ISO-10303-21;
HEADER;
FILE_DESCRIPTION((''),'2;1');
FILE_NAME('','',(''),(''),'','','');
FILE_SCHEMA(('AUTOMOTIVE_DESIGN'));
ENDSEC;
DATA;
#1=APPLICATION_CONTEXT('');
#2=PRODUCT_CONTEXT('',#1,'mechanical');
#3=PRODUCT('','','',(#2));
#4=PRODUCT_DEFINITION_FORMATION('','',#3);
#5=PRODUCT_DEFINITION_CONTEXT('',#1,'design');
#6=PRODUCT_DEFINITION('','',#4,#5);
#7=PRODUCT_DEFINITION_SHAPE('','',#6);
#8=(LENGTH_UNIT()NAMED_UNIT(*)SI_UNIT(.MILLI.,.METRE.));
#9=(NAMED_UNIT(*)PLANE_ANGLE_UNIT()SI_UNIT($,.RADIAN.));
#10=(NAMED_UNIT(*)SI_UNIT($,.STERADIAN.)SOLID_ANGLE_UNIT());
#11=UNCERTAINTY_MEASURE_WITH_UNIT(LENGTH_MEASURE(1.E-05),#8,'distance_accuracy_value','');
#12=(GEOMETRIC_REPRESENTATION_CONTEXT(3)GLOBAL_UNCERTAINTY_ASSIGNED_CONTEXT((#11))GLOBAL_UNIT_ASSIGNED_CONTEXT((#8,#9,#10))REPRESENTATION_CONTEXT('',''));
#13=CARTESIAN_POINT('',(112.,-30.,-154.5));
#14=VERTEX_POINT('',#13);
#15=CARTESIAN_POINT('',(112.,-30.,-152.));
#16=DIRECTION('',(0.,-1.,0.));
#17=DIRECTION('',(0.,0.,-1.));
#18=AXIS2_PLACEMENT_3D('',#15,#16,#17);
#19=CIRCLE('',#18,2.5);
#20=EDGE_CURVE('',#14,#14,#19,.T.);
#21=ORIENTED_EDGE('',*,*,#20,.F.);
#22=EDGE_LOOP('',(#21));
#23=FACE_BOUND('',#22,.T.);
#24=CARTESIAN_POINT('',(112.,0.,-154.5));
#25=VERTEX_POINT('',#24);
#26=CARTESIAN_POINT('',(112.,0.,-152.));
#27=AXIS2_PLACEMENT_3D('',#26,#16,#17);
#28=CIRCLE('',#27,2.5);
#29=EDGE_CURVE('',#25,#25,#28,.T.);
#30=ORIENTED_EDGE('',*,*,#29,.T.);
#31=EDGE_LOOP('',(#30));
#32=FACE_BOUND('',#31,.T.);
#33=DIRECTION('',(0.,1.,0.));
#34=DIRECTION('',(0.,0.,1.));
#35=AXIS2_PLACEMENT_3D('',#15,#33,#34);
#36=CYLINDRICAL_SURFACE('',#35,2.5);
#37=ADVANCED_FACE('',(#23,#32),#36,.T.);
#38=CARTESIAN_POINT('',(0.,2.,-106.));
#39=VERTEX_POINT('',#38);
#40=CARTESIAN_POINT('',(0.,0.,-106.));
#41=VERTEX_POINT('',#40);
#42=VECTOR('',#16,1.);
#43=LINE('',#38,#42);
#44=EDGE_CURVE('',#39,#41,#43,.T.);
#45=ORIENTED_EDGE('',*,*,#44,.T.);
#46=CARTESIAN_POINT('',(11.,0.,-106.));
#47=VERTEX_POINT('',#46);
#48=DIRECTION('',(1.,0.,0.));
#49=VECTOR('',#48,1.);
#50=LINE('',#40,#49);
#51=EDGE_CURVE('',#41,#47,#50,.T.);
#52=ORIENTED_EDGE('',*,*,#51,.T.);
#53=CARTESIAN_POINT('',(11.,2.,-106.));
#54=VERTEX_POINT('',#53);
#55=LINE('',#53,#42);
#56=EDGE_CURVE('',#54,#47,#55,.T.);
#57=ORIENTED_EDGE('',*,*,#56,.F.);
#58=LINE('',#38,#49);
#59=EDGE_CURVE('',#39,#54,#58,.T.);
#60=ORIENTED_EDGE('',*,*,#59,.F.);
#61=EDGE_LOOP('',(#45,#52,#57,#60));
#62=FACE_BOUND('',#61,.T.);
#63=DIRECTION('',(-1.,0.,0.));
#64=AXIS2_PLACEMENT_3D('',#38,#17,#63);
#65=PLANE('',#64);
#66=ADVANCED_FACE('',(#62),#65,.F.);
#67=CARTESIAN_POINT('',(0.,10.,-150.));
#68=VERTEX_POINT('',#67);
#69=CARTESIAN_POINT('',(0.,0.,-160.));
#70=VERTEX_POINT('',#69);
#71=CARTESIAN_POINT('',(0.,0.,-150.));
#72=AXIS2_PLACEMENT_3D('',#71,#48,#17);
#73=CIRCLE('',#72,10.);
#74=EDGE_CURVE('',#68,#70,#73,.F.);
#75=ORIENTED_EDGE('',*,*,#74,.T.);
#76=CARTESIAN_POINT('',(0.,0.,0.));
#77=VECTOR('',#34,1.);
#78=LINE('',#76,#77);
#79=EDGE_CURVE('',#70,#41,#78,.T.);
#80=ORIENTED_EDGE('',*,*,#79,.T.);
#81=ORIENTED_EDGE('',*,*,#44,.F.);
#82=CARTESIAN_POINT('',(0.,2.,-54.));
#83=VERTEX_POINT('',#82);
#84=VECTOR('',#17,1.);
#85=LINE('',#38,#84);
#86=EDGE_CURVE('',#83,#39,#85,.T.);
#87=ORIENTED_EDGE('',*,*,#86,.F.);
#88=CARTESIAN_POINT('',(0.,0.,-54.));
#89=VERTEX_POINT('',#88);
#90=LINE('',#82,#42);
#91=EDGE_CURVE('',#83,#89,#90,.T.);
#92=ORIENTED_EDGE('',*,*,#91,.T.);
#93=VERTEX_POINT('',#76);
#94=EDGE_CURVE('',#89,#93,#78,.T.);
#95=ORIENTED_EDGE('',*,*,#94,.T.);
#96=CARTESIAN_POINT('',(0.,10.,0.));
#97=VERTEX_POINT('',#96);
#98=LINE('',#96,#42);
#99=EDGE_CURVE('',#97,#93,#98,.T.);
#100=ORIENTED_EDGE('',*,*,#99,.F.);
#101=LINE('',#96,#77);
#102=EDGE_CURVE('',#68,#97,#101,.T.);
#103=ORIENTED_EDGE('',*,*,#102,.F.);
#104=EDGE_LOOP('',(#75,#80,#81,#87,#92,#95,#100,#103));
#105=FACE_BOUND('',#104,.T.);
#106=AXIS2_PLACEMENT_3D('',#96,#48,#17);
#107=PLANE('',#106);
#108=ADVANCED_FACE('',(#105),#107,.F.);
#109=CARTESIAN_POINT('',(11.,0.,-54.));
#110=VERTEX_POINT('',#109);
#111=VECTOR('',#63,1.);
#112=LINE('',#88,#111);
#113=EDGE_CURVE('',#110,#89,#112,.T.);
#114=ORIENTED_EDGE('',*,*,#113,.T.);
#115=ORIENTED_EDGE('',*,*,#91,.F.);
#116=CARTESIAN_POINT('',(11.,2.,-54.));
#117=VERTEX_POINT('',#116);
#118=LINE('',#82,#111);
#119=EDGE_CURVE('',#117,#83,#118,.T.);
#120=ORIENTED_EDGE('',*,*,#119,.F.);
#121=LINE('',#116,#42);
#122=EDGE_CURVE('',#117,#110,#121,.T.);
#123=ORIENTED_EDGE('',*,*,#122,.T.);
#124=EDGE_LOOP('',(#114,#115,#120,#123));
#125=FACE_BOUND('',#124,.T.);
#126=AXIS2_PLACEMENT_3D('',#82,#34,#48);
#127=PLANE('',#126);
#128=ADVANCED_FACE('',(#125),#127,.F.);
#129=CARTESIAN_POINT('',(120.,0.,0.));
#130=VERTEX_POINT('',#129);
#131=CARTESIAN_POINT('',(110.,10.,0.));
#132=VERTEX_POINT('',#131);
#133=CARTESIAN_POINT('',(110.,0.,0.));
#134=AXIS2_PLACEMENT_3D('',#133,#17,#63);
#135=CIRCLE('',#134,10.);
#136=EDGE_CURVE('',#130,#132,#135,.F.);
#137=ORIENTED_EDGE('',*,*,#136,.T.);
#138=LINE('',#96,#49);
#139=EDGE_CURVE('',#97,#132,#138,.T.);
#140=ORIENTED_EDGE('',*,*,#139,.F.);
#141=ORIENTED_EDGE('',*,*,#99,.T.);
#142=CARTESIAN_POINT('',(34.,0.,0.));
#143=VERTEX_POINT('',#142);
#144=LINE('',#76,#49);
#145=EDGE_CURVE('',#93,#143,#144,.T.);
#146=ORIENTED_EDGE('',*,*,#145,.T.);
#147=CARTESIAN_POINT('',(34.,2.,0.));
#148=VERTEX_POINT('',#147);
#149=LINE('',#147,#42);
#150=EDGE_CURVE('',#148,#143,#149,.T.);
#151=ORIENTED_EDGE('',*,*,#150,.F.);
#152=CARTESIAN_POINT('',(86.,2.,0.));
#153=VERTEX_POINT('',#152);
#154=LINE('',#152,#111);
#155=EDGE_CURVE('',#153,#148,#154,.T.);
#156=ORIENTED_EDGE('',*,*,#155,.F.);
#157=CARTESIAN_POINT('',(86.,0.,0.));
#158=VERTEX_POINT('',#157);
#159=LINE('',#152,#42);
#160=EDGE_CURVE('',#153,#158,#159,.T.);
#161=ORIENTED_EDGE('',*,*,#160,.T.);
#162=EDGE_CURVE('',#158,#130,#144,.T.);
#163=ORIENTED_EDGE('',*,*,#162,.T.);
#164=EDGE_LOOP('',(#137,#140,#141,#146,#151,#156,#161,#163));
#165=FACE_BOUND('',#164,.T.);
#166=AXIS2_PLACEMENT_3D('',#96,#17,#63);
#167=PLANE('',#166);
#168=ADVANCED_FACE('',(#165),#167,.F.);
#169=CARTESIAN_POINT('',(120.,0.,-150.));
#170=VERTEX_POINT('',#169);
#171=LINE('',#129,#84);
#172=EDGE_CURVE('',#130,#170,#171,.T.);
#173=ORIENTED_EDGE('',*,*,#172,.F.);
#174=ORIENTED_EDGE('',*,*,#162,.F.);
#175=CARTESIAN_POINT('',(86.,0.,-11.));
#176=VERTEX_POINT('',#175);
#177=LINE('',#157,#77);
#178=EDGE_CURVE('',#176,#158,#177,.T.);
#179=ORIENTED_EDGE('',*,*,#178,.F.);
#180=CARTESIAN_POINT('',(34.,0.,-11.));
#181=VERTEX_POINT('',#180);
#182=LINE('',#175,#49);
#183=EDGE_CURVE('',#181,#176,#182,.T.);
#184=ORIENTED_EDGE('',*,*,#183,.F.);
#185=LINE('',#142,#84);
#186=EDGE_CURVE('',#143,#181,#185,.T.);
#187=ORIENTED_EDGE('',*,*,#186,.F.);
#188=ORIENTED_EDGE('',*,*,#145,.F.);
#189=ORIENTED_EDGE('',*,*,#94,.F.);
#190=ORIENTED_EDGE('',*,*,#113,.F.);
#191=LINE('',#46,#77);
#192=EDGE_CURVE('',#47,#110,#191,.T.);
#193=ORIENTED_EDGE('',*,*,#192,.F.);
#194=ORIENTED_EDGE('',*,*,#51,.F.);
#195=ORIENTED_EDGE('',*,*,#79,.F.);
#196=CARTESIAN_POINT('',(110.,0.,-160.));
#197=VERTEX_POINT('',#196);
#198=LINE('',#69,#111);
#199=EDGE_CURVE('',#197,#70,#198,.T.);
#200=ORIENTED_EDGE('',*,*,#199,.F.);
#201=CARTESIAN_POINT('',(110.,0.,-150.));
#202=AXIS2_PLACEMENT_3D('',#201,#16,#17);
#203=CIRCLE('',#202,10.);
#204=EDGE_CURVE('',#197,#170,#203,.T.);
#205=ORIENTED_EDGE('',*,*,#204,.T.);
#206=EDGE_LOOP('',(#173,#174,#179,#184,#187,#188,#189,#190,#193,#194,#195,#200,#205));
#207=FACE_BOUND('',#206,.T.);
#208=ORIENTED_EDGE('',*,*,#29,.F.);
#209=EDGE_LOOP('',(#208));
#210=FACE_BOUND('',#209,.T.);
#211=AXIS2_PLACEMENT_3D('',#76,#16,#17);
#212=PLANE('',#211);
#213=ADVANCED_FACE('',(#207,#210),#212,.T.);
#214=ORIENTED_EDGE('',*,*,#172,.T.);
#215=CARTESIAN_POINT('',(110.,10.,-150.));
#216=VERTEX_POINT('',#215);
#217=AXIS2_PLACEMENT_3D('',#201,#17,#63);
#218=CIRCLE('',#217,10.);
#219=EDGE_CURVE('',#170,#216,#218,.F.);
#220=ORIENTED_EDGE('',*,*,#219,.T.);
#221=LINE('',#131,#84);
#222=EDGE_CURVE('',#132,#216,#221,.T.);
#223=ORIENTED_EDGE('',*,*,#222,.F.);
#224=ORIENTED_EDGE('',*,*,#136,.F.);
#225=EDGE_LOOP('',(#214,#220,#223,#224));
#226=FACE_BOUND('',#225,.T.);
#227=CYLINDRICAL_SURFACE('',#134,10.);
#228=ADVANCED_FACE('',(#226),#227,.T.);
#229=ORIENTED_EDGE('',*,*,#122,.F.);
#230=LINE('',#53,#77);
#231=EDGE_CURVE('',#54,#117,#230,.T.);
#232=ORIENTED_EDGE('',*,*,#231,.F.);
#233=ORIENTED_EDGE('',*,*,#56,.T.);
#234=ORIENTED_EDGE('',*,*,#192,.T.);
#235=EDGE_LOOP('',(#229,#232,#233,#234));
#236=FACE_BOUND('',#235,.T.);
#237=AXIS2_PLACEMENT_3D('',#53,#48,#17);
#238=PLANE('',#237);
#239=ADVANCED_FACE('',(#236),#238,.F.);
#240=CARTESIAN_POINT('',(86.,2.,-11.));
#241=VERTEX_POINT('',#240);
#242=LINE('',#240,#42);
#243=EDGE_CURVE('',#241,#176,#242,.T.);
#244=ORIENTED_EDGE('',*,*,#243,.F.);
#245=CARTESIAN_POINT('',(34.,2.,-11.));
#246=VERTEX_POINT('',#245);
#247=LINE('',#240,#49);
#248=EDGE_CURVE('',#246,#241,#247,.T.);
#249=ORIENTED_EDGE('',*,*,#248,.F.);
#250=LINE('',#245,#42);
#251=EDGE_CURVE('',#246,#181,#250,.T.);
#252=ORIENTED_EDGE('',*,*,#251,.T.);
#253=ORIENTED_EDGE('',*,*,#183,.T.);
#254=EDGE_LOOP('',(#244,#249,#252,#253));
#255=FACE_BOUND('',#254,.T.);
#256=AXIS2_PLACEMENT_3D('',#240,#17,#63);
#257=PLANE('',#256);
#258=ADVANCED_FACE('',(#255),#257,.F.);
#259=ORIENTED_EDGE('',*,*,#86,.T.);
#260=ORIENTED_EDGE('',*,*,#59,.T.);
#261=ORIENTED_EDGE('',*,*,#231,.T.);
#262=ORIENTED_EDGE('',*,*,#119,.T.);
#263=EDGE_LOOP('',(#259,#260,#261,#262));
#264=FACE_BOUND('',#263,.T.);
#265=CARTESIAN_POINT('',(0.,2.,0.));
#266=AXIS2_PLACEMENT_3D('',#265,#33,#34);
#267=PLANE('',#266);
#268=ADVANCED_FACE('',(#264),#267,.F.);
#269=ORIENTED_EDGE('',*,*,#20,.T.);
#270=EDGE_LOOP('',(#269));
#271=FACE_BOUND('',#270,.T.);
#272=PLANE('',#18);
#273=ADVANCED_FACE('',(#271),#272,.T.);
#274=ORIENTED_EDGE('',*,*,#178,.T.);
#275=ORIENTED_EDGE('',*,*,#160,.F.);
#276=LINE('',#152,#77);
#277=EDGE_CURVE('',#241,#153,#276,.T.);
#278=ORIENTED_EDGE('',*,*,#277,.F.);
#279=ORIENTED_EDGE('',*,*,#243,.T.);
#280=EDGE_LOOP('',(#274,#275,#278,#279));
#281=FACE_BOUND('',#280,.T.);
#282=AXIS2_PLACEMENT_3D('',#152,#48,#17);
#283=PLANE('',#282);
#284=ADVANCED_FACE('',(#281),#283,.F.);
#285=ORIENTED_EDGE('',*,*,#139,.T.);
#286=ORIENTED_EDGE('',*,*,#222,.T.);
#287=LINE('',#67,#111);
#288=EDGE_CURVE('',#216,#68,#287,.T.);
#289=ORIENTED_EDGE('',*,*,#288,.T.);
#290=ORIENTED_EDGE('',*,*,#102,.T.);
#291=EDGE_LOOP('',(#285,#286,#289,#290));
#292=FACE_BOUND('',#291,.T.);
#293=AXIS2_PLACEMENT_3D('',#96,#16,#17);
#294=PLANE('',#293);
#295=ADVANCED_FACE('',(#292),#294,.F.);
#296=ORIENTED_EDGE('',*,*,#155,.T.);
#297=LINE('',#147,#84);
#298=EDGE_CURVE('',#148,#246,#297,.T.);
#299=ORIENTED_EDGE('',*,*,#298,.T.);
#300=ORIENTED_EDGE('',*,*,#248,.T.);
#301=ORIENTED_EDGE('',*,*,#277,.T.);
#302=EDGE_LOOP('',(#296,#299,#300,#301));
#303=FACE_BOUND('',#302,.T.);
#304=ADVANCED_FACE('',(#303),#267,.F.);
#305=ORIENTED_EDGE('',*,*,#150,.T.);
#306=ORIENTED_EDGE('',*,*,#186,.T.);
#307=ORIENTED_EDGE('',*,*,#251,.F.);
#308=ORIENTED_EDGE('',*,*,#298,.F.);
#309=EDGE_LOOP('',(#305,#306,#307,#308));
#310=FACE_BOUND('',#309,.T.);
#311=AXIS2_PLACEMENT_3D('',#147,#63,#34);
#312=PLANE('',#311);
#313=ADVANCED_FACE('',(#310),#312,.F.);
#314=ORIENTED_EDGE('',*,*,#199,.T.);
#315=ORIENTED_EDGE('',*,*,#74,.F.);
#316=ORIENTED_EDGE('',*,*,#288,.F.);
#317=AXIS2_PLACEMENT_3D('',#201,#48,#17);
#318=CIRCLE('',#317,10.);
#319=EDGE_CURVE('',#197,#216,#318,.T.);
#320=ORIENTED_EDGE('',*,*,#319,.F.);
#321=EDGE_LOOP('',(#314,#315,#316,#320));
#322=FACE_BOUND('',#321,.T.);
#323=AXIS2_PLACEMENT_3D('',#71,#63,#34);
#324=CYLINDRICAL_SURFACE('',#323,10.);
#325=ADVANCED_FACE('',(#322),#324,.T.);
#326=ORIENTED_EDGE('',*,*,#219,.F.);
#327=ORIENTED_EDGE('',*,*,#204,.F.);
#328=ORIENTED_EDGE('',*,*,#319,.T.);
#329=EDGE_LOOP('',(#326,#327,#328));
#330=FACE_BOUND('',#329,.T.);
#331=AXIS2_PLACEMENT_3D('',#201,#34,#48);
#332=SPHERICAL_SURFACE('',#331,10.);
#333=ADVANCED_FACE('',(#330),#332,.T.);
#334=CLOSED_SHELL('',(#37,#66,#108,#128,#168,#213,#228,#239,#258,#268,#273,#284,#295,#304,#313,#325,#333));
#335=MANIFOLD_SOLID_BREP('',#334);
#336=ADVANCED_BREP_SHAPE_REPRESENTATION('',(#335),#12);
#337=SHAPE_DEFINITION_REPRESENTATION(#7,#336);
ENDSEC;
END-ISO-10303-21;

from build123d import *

# Parameters (mm, degrees)
ESQUISSE1_W             = 120
ESQUISSE1_H             = 160
BOSS_EXTRU_1_DEPTH      = 10
CONG_1_R                = 10
CONG_2_R                = 10
ESQUISSE2_R             = 2.5
BOSS_EXTRU_2_DEPTH      = 30
ESQUISSE3_W             = 11
ESQUISSE3_H             = 52
ESQUISSE3_W_2           = 52
ESQUISSE3_H_2           = 11
ENL_V_MAT_EXTRU_1_DEPTH = 2


with BuildPart() as part:
    # Esquisse1 → Boss.-Extru.1 (new body)
    with BuildSketch(Plane(origin=(0, 0, 0), x_dir=(1, 0, 0), z_dir=(0, 1, 0))):
        with Locations((60, 80)):
            Rectangle(ESQUISSE1_W, ESQUISSE1_H)
    extrude(amount=BOSS_EXTRU_1_DEPTH)

    # Congé1
    cong_1_edges = [part.edges().sort_by_distance(p)[0] for p in [
        (120, 10, -80),
    ]]
    fillet(cong_1_edges, radius=CONG_1_R - 0.0001)  # a hair under: the kernel refuses the full size

    # Congé2
    cong_2_edges = [part.edges().sort_by_distance(p)[0] for p in [
        (117.071097101, 7.071097101, -160),
        (55.00005, 10, -160),
    ]]
    fillet(cong_2_edges, radius=CONG_2_R - 0.0001)  # a hair under: the kernel refuses the full size

    # Esquisse2 → Boss.-Extru.2 (add)
    with BuildSketch(Plane.XZ):
        with Locations(Location((112, -152, 0), (0, 0, 270))):
            Circle(ESQUISSE2_R)
    extrude(amount=BOSS_EXTRU_2_DEPTH)

    # Esquisse3 → Enlèv. mat.-Extru.1 (cut)
    with BuildSketch(Plane.XZ):
        with Locations((5.5, -80)):
            Rectangle(ESQUISSE3_W, ESQUISSE3_H)
        with Locations((60, -5.5)):
            Rectangle(ESQUISSE3_W_2, ESQUISSE3_H_2)
    extrude(amount=-ENL_V_MAT_EXTRU_1_DEPTH, mode=Mode.SUBTRACT)


solid = part.part
